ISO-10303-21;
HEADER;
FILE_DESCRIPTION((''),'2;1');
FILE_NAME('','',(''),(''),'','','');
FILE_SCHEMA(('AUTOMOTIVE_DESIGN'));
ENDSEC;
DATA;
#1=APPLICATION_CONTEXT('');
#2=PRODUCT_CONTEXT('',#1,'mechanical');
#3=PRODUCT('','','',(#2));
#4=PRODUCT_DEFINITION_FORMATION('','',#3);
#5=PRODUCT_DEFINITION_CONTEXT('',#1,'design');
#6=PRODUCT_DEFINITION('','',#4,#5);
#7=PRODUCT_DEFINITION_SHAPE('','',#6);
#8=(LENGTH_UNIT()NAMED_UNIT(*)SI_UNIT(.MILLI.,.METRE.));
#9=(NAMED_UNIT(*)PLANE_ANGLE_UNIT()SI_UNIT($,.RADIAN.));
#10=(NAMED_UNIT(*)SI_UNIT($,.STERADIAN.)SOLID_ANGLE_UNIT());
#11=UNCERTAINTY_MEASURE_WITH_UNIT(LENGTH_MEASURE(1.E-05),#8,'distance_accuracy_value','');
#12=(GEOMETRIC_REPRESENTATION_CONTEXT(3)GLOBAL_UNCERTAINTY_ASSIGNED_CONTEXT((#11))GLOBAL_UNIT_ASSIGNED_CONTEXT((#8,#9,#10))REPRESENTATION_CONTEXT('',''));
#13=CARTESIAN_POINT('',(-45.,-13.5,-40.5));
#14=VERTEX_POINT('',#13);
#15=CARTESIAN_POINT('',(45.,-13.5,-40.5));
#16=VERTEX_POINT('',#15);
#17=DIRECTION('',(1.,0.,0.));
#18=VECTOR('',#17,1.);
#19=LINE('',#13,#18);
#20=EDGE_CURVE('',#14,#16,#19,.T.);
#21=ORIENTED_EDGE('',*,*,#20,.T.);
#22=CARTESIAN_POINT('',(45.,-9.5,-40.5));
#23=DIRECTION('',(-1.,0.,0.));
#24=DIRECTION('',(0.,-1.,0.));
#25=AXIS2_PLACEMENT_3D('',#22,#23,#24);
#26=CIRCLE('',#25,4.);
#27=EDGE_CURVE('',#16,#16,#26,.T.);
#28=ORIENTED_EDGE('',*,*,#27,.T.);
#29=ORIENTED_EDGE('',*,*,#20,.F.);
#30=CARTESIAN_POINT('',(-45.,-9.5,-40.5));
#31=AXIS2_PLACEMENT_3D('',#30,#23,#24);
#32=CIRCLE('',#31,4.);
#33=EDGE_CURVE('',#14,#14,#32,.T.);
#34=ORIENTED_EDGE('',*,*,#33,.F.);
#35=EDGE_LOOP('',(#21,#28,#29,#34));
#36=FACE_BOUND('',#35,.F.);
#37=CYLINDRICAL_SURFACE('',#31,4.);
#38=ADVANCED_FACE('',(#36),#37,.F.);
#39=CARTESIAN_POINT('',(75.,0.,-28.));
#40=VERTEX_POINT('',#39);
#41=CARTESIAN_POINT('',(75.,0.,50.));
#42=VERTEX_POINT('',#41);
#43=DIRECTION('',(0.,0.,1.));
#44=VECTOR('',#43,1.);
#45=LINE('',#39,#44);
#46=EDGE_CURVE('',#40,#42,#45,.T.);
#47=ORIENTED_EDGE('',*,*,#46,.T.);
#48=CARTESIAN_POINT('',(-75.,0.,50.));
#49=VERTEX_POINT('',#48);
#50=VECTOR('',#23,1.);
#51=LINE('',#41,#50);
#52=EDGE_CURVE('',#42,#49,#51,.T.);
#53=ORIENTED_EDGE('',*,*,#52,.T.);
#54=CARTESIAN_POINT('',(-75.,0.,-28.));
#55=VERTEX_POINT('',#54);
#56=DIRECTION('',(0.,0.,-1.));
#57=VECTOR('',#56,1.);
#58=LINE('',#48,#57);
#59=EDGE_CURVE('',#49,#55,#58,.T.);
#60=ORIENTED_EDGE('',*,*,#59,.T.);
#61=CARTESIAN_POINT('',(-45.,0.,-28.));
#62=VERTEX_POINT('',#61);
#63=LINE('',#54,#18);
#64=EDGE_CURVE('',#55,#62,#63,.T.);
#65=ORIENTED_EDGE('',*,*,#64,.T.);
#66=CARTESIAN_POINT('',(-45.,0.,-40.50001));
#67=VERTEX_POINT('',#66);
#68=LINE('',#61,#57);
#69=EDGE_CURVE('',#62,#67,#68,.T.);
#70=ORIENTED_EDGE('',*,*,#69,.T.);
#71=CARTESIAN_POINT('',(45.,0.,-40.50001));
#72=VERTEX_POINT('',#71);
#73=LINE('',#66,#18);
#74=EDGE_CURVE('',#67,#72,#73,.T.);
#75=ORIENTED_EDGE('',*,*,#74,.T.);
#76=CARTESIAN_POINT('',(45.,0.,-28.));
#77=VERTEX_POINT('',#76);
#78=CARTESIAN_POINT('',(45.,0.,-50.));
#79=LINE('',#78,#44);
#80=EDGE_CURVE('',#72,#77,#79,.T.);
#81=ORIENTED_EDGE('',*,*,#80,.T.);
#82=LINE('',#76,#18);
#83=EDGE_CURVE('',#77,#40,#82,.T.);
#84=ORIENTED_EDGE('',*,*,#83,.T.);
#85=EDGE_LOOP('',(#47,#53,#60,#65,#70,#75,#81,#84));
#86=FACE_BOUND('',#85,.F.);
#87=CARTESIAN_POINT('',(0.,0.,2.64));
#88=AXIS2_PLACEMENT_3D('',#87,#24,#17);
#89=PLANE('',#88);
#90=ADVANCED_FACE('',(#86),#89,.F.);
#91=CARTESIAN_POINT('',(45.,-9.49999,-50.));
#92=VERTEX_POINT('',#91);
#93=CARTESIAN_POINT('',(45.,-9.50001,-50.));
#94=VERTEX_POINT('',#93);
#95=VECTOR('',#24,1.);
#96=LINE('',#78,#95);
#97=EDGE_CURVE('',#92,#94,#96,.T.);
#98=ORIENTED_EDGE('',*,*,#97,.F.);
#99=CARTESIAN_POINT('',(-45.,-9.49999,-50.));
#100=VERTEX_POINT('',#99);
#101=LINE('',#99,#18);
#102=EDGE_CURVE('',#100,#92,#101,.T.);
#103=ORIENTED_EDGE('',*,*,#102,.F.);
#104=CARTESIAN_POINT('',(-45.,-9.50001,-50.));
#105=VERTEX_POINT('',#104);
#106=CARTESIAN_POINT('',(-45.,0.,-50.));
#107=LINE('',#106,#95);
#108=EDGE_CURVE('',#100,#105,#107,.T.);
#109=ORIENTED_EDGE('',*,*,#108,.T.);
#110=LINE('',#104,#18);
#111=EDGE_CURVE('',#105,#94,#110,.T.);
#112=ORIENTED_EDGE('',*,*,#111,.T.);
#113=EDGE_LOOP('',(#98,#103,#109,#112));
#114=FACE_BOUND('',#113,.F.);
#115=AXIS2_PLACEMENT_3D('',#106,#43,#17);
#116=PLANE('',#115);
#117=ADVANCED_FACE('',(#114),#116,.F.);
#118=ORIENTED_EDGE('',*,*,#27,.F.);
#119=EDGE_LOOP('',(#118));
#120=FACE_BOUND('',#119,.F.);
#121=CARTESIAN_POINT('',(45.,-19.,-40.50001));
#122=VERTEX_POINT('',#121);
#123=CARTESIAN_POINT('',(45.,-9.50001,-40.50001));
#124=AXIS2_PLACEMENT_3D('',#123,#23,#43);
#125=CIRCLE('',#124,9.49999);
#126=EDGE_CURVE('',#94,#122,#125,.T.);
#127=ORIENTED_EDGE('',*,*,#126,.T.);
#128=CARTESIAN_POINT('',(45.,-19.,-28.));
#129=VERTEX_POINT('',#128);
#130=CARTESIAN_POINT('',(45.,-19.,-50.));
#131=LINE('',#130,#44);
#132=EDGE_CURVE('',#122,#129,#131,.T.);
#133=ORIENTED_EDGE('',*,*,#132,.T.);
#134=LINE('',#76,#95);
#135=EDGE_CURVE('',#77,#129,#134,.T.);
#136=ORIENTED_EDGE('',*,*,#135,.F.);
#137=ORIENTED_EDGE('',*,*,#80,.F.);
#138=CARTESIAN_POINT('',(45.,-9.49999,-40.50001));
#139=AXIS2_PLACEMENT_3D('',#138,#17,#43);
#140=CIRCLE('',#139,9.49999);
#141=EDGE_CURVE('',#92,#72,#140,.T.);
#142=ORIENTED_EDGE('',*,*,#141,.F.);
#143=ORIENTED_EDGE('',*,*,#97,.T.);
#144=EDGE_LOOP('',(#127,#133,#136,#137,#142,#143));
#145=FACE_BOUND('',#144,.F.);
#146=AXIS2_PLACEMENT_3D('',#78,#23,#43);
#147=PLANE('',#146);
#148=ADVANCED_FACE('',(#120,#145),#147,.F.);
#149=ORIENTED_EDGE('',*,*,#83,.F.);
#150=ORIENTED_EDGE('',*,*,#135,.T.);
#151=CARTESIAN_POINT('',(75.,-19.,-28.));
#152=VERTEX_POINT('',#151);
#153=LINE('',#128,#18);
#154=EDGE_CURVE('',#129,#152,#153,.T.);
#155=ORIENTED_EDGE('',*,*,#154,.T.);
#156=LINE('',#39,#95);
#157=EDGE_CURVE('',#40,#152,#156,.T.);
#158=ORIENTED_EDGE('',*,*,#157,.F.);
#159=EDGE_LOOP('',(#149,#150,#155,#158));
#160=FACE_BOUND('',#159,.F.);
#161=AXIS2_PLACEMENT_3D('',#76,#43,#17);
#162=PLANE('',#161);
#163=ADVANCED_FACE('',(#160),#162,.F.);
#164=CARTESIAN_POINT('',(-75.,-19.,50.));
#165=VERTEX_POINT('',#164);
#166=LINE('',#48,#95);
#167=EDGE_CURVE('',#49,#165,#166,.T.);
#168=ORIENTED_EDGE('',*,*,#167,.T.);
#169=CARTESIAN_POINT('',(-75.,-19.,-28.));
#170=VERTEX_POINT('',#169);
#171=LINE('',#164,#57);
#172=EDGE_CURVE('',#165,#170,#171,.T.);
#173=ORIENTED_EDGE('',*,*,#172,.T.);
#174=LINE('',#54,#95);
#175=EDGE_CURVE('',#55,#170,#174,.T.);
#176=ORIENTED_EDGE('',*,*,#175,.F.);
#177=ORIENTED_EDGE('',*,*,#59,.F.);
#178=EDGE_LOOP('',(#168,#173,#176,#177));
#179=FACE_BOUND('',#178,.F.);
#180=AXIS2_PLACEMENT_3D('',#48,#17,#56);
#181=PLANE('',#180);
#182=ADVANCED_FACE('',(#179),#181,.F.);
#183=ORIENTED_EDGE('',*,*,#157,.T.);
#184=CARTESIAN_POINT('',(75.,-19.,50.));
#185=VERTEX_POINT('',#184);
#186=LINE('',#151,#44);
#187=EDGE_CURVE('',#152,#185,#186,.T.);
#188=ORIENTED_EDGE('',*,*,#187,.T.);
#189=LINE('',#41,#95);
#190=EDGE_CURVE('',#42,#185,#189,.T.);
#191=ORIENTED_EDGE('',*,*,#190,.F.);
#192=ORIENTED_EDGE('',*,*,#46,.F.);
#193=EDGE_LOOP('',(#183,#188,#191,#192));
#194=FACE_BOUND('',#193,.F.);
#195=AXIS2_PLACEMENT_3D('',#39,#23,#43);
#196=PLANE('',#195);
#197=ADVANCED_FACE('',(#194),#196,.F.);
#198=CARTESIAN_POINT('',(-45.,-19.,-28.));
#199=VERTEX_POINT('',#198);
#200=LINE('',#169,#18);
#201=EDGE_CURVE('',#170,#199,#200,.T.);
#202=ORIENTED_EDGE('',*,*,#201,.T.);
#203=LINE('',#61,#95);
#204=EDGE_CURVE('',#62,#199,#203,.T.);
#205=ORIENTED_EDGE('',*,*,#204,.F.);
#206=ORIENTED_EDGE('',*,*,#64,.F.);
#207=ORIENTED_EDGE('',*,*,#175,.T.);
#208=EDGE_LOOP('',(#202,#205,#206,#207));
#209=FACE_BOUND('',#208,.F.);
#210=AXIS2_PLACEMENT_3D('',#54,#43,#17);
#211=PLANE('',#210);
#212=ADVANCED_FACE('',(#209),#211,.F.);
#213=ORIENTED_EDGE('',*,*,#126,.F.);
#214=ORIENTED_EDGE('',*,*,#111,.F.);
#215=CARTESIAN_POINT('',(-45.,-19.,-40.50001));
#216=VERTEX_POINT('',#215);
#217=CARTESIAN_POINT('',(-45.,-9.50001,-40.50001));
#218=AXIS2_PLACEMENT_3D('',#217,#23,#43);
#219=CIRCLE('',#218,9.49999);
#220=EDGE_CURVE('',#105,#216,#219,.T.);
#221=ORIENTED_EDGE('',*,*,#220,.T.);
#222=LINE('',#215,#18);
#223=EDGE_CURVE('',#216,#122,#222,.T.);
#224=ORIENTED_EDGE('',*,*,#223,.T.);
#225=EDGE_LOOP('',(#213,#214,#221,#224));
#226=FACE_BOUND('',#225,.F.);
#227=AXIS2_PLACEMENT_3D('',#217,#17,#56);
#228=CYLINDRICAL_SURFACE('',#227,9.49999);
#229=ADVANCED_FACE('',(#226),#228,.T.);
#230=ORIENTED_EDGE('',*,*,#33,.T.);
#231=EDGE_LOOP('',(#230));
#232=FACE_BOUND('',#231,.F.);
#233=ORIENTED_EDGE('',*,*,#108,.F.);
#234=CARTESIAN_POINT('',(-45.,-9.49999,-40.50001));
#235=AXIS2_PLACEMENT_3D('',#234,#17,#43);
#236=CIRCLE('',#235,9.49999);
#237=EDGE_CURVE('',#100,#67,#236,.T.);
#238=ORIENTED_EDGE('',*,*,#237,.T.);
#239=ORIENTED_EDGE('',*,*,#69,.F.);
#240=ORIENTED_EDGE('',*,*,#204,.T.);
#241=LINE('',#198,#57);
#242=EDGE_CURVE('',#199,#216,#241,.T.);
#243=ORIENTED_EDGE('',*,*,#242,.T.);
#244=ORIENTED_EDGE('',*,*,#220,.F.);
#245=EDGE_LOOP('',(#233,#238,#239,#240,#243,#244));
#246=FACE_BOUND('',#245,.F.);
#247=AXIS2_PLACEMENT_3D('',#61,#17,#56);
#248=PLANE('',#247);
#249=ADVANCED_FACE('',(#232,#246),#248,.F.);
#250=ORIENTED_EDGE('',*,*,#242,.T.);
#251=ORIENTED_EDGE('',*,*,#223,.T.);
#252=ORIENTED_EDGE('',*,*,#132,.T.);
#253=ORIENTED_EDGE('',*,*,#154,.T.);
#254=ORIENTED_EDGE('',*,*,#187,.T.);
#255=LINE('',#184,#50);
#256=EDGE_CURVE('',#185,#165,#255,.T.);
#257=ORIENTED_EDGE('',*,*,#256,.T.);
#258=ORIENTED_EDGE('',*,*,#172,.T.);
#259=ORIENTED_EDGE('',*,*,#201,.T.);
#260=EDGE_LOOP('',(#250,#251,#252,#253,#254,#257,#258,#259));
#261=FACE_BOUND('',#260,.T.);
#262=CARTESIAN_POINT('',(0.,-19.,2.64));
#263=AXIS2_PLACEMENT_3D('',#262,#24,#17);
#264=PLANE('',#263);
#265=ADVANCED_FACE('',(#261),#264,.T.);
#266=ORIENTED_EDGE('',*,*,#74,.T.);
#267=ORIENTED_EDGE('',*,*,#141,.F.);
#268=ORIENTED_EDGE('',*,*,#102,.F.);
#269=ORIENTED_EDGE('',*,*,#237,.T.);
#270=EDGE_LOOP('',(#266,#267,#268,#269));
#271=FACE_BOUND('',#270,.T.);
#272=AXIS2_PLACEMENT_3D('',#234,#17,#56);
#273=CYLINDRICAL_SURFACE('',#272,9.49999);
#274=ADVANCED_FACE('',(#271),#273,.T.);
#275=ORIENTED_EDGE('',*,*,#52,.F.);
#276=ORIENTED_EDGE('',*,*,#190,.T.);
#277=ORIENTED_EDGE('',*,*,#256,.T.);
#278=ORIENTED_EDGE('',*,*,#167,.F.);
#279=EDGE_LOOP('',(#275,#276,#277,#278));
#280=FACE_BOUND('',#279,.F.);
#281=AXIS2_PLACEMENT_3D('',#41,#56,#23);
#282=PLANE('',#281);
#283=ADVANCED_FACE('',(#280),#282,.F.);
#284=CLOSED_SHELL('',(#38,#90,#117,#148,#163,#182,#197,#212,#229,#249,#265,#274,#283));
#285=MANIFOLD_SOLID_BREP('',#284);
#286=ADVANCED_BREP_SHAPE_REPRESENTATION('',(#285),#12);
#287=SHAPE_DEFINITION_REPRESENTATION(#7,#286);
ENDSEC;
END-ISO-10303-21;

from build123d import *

# Parameters (mm, degrees)
F1_DEPTH = 19
F2_R     = 4
F3_DEPTH = 120.001
F4_R     = 9.49999


# Not quite as in the source:
# - a fillet or chamfer is up to 0.001 mm smaller than in the source, because OpenCascade refuses the exact size


with BuildPart() as f1:
    # F0 (on Front) → F1 (new body)
    with BuildSketch(Plane.XZ):
        Polygon((-45, -50), (45, -50), (45, -28), (75, -28), (75, 50), (-75, 50), (-75, -28), (-45, -28), align=None)
    extrude(amount=F1_DEPTH)

    # F2 (on face) → F3 (cut, through all)
    with BuildSketch(Plane(origin=(-45, 0, 0), x_dir=(0, -1, 0), z_dir=(-1, 0, 0))):
        with Locations((9.5, -40.5)):
            Circle(F2_R)
    extrude(amount=-F3_DEPTH, mode=Mode.SUBTRACT)

    # F4 (radius 9.5 in the source; OpenCascade refuses exactly that, so slightly less here)
    f4_edges = [f1.edges().sort_by_distance(p)[0] for p in [
        (0, 0, -50),
        (0, -19, -50),
    ]]
    fillet(f4_edges, radius=F4_R)


solid = f1.part
